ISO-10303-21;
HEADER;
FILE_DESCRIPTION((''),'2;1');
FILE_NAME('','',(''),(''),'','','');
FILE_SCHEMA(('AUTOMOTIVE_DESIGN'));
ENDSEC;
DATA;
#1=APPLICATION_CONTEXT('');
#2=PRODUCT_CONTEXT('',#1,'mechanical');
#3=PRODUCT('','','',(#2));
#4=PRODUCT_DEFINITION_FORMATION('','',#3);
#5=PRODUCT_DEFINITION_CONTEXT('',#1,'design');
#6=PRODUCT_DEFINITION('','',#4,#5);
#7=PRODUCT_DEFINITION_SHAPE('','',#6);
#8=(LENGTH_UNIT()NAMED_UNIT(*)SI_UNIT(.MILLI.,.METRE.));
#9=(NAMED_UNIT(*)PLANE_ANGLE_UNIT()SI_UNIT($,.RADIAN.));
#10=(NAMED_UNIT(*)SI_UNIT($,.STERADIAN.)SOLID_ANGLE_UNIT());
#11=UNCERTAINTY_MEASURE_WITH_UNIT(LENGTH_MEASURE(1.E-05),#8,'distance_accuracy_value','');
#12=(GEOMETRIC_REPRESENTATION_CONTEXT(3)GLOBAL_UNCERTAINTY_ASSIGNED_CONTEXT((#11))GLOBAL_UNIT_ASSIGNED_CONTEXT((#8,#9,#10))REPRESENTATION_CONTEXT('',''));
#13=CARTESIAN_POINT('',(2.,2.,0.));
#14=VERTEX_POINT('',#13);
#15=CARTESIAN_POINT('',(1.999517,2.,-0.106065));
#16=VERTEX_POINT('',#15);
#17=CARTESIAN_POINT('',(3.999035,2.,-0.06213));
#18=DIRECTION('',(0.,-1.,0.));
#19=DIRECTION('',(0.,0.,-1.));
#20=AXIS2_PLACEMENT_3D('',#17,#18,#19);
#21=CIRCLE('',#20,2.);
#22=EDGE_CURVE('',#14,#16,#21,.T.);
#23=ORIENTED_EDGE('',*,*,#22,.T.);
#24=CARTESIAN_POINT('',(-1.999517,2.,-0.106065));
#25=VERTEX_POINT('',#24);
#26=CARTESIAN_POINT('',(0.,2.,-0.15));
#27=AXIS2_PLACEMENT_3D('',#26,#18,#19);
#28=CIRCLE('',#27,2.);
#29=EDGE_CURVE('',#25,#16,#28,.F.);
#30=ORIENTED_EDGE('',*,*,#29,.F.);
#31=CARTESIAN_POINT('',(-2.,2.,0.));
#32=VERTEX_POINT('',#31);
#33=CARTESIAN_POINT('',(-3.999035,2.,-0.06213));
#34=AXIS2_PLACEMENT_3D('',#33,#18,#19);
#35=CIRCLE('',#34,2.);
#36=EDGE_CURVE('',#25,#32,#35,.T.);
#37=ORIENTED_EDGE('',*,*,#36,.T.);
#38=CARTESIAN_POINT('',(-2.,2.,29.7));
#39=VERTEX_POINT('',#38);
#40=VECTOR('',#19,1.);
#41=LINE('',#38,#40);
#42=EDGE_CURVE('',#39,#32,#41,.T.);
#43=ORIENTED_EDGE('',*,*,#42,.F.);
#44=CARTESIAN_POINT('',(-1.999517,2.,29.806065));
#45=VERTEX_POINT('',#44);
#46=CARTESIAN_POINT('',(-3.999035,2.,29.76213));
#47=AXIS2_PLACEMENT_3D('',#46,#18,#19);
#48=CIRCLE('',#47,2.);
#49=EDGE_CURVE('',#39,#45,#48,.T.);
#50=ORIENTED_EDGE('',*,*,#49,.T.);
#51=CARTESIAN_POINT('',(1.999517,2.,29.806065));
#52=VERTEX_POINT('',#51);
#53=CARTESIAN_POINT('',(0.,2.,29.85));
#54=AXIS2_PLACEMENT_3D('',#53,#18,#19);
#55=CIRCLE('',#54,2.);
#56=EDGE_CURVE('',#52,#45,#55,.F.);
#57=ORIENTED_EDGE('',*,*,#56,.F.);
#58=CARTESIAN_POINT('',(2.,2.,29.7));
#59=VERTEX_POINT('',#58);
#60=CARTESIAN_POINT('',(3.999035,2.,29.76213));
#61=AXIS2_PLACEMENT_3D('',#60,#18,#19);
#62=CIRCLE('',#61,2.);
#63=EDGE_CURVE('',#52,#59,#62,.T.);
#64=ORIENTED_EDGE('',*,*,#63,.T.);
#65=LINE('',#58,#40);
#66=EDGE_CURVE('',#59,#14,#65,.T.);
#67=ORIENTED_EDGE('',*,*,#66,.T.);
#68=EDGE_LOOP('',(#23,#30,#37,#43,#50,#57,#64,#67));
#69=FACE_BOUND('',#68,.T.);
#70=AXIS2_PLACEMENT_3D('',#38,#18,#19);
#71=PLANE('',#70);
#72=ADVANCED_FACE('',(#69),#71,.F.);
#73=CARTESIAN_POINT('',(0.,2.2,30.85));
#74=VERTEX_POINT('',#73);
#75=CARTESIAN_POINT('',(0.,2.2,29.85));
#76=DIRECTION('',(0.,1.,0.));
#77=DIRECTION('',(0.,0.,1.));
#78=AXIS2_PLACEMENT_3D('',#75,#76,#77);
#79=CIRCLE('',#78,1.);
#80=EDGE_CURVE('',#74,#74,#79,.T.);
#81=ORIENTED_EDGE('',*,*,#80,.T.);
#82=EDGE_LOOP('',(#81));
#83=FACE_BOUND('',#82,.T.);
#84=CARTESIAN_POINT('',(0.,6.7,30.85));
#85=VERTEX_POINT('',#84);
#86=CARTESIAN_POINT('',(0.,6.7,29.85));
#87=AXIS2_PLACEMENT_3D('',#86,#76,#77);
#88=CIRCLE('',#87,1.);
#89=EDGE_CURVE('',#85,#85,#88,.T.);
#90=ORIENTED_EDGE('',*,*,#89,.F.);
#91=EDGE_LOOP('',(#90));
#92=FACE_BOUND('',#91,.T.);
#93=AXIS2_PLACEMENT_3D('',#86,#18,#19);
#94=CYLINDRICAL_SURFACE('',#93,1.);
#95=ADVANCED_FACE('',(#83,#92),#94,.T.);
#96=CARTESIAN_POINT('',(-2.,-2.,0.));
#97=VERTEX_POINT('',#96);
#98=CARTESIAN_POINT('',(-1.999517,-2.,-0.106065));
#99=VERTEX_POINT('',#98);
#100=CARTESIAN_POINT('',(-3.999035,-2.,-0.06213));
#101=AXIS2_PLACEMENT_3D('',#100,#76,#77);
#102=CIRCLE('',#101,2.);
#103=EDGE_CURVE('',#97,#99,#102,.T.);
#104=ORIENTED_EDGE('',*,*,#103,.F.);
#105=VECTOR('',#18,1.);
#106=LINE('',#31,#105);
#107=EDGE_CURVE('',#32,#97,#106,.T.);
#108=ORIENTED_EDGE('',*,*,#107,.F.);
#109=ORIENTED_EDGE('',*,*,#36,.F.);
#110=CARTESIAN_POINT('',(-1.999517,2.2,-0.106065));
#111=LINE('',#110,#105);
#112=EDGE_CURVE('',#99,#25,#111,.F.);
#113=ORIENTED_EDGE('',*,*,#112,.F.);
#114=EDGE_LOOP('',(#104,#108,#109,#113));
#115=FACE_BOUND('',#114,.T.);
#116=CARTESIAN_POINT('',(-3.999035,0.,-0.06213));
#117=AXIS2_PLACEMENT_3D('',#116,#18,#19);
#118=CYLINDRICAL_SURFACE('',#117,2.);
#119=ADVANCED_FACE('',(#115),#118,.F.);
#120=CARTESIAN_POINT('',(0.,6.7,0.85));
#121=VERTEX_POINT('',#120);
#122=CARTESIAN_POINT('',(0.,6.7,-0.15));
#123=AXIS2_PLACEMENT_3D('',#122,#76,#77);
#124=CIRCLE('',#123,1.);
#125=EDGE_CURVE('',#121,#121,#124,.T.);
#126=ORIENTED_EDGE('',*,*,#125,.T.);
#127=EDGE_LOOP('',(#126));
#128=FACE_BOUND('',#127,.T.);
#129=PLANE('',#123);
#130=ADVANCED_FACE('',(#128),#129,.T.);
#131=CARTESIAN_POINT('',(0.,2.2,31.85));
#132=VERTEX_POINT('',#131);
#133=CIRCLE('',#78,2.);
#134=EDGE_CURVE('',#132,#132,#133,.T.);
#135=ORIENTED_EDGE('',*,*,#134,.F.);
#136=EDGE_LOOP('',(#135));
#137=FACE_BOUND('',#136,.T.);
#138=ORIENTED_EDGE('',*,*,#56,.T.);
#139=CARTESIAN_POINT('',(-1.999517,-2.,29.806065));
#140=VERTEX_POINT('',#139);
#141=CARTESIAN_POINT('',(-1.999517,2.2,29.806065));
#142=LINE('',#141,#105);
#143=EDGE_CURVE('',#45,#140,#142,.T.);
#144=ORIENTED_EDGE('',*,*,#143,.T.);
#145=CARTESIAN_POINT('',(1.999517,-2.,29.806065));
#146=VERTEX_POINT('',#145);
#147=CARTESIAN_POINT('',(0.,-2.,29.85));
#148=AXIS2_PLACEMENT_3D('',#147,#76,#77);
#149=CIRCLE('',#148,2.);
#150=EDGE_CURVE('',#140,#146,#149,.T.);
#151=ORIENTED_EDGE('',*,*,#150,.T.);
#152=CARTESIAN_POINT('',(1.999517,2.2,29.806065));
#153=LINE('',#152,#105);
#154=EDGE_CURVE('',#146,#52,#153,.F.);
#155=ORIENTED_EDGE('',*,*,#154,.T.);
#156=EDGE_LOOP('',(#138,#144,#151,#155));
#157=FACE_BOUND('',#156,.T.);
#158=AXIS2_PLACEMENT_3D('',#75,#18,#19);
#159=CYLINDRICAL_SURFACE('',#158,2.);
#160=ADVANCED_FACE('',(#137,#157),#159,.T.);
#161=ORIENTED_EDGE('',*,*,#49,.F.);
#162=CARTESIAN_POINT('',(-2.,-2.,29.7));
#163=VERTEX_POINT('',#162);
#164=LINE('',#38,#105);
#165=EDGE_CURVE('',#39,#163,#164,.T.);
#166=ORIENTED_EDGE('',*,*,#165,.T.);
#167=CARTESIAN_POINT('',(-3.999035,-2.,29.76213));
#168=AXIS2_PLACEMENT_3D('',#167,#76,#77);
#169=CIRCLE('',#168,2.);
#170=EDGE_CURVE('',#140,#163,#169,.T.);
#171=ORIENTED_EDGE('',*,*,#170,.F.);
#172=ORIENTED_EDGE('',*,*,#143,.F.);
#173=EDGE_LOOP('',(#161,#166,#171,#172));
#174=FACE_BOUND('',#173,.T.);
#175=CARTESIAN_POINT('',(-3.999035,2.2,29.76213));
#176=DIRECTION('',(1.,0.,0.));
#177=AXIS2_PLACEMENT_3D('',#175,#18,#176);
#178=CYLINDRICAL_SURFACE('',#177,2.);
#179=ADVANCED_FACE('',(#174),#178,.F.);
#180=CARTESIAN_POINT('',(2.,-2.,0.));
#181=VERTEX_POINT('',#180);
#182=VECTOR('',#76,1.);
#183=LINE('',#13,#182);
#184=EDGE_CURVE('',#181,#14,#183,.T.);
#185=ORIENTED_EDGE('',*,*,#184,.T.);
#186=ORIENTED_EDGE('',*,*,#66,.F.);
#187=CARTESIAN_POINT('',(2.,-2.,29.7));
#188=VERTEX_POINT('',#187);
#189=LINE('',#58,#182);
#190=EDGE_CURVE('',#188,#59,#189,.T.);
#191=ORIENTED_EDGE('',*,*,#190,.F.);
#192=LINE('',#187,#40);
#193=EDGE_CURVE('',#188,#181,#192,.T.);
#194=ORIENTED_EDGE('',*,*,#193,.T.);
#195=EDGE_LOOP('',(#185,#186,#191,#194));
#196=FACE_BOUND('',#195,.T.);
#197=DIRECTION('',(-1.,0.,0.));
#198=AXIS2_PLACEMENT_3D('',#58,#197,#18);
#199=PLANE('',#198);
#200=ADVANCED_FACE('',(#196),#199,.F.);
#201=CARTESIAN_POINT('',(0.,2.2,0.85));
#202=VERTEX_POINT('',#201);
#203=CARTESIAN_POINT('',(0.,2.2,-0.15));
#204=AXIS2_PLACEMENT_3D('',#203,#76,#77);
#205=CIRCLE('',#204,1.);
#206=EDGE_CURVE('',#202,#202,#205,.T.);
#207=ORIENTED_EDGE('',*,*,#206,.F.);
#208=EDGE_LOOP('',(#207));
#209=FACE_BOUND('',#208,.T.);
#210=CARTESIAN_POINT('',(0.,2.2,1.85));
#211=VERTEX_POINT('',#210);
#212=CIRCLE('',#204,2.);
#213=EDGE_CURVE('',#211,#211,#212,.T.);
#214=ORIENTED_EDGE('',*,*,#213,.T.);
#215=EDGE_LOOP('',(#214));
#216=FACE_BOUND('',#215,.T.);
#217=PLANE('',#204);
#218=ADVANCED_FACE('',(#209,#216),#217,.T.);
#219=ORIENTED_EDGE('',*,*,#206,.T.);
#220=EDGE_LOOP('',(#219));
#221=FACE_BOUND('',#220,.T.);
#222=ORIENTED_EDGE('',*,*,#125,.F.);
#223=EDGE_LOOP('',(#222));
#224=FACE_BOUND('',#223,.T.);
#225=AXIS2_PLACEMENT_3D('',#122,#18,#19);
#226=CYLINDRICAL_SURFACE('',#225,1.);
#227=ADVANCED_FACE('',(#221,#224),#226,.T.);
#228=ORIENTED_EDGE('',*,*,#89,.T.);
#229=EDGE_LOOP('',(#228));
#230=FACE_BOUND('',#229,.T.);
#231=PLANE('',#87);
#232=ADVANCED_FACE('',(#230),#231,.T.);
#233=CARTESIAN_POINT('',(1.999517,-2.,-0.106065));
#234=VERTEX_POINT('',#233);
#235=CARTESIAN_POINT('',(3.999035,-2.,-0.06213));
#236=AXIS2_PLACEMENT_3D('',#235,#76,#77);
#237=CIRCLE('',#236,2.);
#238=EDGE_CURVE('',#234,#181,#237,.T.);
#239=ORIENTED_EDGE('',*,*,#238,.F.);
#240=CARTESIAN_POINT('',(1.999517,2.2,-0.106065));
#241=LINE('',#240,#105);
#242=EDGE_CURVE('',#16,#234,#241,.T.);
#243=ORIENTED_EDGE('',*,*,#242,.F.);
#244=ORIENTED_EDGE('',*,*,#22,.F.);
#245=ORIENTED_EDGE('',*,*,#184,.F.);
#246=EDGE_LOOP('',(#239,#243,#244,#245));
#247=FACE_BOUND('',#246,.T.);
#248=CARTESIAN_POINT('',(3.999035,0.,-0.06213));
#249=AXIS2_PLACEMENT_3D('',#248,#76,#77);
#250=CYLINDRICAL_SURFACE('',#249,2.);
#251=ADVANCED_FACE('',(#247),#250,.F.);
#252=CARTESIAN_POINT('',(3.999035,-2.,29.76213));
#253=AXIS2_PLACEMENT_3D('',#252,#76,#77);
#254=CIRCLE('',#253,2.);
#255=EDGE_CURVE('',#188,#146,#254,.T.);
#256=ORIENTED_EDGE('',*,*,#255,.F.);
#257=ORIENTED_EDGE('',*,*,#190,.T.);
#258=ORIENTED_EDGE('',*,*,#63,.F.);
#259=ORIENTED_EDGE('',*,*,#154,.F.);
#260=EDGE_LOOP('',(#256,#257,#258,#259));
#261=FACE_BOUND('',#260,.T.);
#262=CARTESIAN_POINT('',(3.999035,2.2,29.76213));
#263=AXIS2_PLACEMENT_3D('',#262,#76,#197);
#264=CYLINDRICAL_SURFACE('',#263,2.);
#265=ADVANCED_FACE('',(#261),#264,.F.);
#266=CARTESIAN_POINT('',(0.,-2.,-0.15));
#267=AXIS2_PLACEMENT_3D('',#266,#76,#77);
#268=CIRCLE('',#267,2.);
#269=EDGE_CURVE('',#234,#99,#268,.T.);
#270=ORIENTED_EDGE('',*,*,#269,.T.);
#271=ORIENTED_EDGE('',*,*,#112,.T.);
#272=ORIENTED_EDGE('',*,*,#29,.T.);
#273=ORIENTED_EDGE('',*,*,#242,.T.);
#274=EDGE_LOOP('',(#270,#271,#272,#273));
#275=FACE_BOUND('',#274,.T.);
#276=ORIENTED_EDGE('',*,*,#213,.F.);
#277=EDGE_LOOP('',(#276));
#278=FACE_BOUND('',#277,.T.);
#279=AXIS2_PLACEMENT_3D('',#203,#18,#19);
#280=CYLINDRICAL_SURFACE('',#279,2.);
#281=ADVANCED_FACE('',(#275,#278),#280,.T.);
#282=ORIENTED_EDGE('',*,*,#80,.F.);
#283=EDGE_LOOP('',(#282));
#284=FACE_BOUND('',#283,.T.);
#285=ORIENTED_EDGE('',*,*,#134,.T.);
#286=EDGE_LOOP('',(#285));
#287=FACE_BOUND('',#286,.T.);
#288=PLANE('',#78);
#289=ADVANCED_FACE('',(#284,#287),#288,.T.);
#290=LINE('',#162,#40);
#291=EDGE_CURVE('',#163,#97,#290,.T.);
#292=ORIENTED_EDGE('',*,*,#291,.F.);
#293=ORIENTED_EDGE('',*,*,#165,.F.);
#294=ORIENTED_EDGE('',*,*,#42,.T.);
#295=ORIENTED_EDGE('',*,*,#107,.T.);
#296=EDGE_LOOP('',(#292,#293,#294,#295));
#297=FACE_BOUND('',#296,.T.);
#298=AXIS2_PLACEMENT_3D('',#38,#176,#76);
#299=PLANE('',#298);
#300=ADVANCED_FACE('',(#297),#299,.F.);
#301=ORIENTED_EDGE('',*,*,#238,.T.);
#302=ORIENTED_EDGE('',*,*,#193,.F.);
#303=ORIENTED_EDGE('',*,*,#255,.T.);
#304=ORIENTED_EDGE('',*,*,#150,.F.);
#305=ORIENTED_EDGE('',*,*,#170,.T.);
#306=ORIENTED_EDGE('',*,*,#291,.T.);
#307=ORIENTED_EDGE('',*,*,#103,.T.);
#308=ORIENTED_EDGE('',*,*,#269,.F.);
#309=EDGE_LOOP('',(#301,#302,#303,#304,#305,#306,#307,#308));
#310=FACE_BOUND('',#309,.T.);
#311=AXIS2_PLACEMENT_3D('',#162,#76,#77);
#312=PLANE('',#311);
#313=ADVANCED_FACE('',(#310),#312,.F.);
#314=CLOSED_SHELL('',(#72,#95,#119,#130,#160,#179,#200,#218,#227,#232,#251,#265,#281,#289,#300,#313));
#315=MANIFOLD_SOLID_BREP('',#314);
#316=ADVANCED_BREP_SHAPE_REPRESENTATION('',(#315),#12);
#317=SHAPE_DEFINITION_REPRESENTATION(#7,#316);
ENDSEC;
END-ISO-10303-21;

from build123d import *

# Parameters (mm, degrees)
SKIZZE1_W                            = 4
SKIZZE1_H                            = 4
AUFSATZ_LINEAR_AUSTRAGEN1_DEPTH      = 29.7
AUFSATZ_LINEAR_AUSTRAGEN2_DEPTH      = 0.2
AUFSATZ_LINEAR_AUSTRAGEN2_DEPTH_BACK = 4
AUFSATZ_LINEAR_AUSTRAGEN2_START      = 2
SKIZZE2_R                            = 2
SKIZZE3_R                            = 1
AUFSATZ_LINEAR_AUSTRAGEN4_DEPTH      = 4.5
VERRUNDUNG1_R                        = 2


with BuildPart() as part:
    # Skizze1 → Aufsatz-Linear austragen1 (new body)
    with BuildSketch(Plane.XY):
        Rectangle(SKIZZE1_W, SKIZZE1_H)
    extrude(amount=AUFSATZ_LINEAR_AUSTRAGEN1_DEPTH)

    # Skizze2 → Aufsatz-Linear austragen2 (add, two sides: drawn at the far end of the back side and taken through both)
    with BuildSketch(Plane(origin=(0, 0, 0), x_dir=(1, 0, 0), z_dir=(0, 1, 0)).offset(AUFSATZ_LINEAR_AUSTRAGEN2_START - AUFSATZ_LINEAR_AUSTRAGEN2_DEPTH_BACK)):
        with Locations(Location((0, -29.85, 0), (0, 0, 175.698777695))):
            Circle(SKIZZE2_R)
        with Locations(Location((0, 0.15, 0), (0, 0, 355.698777695))):
            Circle(SKIZZE2_R)
    extrude(amount=AUFSATZ_LINEAR_AUSTRAGEN2_DEPTH + AUFSATZ_LINEAR_AUSTRAGEN2_DEPTH_BACK)

    # Skizze3 → Aufsatz-Linear austragen4 (add)
    with BuildSketch(Plane(origin=(0, 2.2, 0), x_dir=(1, 0, 0), z_dir=(0, 1, 0))):
        with Locations(Location((0, -29.85, 0), (0, 0, 270))):
            Circle(SKIZZE3_R)
        with Locations(Location((0, 0.15, 0), (0, 0, 270))):
            Circle(SKIZZE3_R)
    extrude(amount=AUFSATZ_LINEAR_AUSTRAGEN4_DEPTH)

    # Verrundung1
    # the kernel refuses this fillet: 2 mm, written as the material it adds along each edge
    with BuildSketch(Plane(origin=(-1.994367068, 2, 29.7), x_dir=(-0.048500864171623644, 0, 0.9988231405882653), z_dir=(0, -1, 0)), Plane(origin=(1.994367068, 2, 0), x_dir=(0.04850086417162046, 0, -0.9988231405882655), z_dir=(0, -1, 0))) as verrundung1_piece_1:
        with BuildLine():
            CenterArc((0.159284835, 1.999295107), VERRUNDUNG1_R, 265.439839389, 3.038923762)
            Line((0.000273202, 0.005626303), (0, 0))
            ThreePointArc((0, 0), (0.053094945, 0.000704893), (0.10618989, 0))
        make_face()
    extrude(amount=4)
    with BuildSketch(Plane(origin=(1.994367068, -2, 29.7), x_dir=(1, 0, 0), z_dir=(0, 1, 0)), Plane(origin=(-1.994367068, -2, 0), x_dir=(-1, 0, 0), z_dir=(0, 1, 0))) as verrundung1_piece_2:
        with BuildLine():
            CenterArc((2.00466767, -0.062129838), VERRUNDUNG1_R, 178.219824845, 3.038923762)
            ThreePointArc((0.005150301, -0.106064919), (0.003279214, -0.052998272), (0, 0))
            Line((0, 0), (0.005632932, 0))
        make_face()
    extrude(amount=4)


solid = part.part
